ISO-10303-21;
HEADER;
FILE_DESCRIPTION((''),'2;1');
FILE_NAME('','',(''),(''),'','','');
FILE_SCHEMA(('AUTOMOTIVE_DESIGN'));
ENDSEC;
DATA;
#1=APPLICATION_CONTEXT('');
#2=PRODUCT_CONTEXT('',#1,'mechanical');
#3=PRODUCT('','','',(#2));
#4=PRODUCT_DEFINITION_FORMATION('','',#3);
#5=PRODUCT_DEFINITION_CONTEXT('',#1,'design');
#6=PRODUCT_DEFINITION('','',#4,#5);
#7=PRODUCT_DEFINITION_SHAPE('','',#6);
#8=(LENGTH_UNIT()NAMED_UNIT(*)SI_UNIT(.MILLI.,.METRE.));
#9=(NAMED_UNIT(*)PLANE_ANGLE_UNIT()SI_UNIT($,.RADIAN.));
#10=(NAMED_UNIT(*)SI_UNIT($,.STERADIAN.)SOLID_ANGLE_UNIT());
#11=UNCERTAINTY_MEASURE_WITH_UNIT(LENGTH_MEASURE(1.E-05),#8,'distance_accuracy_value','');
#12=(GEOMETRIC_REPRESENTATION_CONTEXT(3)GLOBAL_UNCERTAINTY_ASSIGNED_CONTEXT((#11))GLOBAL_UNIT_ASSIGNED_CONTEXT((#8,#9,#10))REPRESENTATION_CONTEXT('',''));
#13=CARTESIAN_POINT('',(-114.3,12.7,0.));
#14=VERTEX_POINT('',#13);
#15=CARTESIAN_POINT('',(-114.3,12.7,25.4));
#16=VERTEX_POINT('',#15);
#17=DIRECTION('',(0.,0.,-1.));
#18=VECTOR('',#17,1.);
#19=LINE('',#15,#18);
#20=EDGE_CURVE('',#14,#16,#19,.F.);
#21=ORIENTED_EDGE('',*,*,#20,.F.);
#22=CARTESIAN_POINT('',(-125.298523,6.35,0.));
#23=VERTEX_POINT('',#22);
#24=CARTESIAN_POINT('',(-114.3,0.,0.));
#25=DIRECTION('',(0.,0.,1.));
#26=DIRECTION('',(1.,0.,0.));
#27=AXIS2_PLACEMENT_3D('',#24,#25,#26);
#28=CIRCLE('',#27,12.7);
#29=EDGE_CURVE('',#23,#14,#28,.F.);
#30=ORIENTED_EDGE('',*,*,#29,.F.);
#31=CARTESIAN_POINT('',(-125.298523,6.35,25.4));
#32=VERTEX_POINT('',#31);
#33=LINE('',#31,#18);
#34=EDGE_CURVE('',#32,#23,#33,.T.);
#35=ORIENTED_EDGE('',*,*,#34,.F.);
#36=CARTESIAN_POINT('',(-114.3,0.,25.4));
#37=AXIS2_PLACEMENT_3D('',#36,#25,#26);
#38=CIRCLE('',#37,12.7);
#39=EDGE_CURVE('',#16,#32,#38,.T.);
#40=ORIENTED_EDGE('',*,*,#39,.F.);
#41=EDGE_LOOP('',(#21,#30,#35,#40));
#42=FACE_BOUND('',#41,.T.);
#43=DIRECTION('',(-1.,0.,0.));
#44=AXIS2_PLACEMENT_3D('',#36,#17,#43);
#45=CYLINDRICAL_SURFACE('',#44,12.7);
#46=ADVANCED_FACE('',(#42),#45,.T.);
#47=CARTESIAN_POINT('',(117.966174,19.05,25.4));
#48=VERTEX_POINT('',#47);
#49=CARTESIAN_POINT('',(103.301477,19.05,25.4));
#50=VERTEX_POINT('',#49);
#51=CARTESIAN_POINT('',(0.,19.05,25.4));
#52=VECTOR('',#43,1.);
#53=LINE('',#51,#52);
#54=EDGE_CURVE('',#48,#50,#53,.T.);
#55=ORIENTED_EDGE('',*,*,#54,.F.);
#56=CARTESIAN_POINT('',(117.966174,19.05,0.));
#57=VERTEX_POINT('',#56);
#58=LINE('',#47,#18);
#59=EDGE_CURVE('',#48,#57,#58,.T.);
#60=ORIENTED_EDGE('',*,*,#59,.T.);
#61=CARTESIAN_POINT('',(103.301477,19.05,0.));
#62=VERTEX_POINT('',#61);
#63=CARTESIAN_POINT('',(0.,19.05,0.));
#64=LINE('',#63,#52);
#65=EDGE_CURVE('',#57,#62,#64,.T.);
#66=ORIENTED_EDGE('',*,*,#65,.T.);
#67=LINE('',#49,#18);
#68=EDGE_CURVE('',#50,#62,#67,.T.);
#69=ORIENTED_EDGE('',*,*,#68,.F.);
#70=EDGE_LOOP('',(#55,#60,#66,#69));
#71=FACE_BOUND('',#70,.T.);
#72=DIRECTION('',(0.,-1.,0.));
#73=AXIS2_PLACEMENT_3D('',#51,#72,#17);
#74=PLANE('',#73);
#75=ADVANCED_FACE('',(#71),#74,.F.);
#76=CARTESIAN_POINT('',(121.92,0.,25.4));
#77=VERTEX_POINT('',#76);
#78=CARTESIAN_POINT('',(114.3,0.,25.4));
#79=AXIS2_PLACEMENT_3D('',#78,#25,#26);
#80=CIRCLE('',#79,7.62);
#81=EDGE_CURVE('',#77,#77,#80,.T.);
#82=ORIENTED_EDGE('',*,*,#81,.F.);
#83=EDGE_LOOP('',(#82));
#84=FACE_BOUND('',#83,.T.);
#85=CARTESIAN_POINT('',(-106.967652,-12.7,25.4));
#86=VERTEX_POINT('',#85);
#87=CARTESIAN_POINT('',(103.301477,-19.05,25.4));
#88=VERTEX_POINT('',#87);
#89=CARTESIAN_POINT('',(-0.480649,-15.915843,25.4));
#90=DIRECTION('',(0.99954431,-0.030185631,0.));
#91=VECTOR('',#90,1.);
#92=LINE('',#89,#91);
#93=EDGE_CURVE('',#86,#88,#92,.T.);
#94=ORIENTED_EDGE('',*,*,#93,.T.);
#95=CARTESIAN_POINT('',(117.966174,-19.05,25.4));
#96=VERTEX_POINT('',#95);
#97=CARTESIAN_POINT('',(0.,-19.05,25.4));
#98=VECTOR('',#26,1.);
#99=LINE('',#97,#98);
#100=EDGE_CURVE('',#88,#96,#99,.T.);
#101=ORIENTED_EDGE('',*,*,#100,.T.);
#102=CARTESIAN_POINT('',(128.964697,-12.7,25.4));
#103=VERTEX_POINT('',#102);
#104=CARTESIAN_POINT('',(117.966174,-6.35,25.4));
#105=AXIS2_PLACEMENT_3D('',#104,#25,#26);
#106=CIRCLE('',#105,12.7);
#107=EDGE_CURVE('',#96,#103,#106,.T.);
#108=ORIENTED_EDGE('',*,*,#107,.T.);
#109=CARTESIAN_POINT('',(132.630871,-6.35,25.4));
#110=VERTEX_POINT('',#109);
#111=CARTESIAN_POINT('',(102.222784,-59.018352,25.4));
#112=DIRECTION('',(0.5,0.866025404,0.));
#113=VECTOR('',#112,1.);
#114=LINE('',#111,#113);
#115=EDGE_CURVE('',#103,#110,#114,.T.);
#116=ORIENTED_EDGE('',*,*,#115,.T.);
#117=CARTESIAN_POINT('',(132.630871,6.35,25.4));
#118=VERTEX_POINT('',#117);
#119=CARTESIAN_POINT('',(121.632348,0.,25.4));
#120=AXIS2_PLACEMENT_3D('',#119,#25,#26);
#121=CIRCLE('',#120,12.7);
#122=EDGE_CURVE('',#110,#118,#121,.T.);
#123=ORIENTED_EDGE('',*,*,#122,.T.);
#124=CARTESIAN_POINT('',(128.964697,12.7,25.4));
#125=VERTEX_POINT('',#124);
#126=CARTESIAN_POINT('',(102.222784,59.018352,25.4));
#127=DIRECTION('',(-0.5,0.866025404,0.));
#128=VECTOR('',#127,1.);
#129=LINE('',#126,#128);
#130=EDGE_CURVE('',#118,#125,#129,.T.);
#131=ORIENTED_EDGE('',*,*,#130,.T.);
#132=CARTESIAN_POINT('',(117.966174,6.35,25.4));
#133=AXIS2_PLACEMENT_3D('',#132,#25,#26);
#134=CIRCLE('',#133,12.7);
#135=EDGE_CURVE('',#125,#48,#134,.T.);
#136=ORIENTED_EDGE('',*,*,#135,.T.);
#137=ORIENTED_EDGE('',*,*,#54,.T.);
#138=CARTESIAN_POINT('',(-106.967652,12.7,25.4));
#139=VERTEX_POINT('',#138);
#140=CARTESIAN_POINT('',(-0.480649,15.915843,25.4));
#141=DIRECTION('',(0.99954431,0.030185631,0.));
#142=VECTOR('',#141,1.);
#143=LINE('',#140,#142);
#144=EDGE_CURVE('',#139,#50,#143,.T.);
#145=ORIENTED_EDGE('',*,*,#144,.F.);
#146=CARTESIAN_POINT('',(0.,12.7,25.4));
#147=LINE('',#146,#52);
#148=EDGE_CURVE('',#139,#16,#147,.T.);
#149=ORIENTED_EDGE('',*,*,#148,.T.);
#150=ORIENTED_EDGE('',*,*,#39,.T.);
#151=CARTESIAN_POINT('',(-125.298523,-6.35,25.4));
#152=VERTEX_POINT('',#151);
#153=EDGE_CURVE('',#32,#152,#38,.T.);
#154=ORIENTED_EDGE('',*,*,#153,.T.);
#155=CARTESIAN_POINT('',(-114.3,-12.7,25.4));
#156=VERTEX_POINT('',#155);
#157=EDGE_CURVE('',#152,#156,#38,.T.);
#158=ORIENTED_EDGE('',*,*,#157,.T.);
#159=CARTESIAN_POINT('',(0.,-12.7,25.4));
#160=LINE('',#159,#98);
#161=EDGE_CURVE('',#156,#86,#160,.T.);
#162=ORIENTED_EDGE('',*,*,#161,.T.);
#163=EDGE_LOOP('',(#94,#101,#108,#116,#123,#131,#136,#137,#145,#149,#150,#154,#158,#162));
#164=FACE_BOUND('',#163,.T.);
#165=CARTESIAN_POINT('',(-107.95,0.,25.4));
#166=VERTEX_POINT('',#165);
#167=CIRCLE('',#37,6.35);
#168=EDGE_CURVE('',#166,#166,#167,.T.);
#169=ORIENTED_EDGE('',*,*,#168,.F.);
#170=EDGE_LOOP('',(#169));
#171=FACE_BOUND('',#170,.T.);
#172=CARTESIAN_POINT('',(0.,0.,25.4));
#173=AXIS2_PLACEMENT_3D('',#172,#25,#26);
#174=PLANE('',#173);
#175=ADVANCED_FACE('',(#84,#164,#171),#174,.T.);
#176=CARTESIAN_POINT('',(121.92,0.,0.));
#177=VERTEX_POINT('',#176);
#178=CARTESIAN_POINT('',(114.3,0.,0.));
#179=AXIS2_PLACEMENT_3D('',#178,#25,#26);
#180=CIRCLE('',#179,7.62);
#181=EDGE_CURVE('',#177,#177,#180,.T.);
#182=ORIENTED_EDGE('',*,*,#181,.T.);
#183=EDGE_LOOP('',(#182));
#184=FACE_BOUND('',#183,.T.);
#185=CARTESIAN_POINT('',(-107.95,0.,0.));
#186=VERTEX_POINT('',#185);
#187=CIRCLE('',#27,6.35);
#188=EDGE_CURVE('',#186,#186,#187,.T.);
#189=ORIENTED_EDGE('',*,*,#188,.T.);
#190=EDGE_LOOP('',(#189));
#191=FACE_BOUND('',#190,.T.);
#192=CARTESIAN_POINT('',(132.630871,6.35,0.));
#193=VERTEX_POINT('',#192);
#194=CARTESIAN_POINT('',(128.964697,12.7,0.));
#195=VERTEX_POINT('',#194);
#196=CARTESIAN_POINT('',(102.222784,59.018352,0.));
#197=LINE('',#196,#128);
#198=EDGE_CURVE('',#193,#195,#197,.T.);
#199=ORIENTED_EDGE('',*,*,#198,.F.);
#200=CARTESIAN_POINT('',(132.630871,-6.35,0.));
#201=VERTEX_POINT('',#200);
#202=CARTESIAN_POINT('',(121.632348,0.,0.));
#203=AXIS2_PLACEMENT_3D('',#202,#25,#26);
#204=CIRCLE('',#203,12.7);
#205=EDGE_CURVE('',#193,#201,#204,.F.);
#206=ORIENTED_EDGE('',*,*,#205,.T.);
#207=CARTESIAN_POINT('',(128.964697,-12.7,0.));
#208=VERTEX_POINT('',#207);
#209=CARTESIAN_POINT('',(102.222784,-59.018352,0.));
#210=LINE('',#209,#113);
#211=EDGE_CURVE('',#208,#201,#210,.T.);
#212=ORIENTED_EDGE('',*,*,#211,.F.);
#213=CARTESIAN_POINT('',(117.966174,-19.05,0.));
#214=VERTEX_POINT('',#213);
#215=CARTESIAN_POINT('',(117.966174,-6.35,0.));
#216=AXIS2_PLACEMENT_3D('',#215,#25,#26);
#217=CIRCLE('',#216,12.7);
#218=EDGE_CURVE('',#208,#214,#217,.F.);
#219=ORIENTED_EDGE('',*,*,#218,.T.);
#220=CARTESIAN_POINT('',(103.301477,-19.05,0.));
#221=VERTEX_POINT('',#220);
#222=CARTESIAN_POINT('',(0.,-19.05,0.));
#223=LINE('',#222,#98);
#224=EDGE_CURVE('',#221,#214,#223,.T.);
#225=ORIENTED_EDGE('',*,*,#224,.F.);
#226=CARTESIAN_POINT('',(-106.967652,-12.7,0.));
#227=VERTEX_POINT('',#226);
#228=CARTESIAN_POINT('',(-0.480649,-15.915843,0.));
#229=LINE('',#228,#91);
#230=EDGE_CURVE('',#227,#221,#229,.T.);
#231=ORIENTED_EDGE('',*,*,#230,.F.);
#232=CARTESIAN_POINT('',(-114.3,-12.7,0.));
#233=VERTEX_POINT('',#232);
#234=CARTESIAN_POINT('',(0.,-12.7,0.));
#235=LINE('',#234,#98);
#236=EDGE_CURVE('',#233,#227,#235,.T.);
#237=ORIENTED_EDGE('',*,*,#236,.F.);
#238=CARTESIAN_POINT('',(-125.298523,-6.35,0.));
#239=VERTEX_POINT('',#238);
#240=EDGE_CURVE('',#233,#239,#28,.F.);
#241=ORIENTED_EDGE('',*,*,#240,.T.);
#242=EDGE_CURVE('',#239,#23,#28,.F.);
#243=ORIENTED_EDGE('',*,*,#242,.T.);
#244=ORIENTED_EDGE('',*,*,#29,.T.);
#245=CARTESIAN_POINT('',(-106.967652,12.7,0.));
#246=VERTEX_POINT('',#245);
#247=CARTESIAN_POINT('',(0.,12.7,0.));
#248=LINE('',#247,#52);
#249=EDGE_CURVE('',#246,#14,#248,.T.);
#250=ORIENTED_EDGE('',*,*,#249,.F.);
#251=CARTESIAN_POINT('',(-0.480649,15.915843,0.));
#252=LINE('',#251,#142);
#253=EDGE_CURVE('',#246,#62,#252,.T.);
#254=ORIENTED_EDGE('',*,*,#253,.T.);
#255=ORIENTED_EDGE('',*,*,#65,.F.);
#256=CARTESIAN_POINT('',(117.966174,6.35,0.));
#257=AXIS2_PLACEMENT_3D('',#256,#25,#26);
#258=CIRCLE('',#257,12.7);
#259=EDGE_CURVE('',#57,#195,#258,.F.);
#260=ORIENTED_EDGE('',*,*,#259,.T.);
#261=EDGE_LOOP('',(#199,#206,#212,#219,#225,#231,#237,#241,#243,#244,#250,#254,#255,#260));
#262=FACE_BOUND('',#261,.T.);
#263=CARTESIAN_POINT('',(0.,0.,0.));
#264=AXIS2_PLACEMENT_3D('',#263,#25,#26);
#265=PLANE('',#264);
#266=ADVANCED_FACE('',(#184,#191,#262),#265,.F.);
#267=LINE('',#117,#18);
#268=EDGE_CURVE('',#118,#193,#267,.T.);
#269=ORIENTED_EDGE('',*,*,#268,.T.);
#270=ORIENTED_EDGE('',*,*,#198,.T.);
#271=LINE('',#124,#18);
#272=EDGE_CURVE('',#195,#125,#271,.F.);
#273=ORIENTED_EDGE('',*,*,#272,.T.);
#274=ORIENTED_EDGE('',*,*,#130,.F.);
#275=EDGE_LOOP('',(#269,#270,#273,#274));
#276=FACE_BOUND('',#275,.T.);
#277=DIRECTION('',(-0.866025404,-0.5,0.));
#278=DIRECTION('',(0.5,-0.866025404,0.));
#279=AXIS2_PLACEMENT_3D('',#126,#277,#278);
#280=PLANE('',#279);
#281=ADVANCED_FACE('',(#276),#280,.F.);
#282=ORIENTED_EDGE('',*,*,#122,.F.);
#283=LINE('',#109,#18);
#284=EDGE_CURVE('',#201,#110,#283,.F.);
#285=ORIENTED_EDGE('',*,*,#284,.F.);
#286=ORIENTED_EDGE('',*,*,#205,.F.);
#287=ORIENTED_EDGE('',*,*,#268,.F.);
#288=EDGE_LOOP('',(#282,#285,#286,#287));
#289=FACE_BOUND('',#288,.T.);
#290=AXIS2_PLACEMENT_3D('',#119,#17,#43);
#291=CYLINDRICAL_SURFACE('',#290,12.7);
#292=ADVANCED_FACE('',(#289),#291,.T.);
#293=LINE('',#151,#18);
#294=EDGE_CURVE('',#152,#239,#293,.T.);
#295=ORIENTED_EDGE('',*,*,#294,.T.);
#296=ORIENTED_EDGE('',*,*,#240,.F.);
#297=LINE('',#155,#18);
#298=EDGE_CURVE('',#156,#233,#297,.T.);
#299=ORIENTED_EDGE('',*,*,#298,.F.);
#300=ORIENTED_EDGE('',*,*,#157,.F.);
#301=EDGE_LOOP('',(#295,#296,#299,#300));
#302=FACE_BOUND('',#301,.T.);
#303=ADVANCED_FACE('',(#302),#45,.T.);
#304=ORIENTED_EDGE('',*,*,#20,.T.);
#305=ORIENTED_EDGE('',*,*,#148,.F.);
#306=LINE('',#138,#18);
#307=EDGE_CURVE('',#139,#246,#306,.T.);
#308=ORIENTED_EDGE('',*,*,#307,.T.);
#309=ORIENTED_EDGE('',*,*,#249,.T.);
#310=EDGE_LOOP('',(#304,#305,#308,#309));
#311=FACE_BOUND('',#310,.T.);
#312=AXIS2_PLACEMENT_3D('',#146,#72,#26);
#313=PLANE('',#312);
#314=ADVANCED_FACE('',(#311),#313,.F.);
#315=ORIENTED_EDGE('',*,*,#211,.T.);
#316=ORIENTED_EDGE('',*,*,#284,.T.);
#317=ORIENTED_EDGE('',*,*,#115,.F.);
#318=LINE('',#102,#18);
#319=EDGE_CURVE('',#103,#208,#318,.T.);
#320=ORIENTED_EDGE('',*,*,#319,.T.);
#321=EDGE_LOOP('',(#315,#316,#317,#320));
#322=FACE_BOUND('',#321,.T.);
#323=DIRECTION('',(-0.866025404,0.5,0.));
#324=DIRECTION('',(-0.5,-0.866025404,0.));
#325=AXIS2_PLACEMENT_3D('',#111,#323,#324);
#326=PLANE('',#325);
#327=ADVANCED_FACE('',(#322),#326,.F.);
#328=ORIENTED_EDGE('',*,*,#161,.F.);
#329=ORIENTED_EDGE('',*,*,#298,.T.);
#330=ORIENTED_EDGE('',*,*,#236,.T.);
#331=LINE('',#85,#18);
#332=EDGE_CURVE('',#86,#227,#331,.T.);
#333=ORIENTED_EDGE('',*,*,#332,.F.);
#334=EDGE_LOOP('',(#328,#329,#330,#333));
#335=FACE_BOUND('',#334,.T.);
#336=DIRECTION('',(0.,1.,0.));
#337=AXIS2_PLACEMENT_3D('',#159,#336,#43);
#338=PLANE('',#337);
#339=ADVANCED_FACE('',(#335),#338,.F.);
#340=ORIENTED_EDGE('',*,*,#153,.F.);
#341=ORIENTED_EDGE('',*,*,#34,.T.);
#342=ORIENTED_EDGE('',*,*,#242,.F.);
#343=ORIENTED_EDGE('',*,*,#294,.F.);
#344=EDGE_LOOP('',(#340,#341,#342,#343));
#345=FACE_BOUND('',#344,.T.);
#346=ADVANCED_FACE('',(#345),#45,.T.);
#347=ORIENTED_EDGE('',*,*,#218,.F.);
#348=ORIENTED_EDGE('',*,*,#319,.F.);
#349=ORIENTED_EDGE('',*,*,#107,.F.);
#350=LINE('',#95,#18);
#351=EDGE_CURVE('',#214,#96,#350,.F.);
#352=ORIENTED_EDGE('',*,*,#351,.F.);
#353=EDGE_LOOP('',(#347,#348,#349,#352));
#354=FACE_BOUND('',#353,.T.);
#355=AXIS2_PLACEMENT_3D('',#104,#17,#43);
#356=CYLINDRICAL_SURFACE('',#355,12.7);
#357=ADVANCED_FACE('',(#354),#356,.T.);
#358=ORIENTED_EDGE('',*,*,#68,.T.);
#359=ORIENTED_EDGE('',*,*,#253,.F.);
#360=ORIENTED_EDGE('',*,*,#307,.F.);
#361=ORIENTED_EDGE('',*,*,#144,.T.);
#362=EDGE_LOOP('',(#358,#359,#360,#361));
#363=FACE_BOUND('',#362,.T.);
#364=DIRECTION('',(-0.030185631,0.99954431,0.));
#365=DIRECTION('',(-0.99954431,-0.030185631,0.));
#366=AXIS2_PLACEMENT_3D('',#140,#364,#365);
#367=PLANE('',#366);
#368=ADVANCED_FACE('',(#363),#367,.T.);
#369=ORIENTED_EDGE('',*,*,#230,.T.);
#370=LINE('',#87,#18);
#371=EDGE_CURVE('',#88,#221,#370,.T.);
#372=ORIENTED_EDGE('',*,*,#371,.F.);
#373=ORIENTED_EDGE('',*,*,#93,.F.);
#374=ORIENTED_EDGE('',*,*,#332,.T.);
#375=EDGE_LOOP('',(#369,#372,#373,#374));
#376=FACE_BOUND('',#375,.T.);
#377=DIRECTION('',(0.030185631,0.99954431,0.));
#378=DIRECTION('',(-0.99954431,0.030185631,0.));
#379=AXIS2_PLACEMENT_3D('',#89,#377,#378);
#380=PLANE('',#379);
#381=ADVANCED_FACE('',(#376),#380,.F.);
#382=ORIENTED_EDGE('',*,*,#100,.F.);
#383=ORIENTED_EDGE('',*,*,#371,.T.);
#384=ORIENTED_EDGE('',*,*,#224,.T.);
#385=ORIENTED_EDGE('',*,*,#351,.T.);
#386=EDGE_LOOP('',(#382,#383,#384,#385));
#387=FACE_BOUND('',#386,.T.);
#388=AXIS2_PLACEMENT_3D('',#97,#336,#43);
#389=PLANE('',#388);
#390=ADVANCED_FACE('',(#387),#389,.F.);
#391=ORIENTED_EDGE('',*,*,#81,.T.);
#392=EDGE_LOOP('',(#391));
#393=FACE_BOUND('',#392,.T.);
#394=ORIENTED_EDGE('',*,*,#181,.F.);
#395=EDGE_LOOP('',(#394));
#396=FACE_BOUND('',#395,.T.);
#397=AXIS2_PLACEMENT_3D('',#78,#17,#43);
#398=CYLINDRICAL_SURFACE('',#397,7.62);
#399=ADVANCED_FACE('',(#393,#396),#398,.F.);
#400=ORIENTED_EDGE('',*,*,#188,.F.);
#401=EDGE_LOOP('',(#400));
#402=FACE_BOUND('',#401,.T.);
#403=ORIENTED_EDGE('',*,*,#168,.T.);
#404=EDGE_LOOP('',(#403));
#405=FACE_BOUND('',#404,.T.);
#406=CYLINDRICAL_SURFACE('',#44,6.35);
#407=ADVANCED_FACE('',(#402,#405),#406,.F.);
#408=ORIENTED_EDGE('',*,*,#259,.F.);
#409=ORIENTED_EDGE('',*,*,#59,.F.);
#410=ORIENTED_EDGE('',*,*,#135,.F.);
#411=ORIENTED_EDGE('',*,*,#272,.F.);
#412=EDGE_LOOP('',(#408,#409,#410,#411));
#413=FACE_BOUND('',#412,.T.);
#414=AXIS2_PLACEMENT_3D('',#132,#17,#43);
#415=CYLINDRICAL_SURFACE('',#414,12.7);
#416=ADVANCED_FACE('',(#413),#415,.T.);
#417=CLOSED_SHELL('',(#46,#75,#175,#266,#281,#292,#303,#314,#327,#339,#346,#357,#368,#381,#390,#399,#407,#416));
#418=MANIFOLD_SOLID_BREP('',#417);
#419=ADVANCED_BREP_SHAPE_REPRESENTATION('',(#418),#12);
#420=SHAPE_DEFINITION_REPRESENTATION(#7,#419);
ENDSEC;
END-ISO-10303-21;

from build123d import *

# Parameters (mm, degrees)
SKETCH1_R           = 6.35
SKETCH1_R_2         = 7.62
BOSS_EXTRUDE1_DEPTH = 25.4
FILLET3_R           = 12.7


with BuildPart() as part:
    # Sketch1 → Boss-Extrude1 (new body)
    with BuildSketch(Plane.XY):
        Polygon((-106.967651581, 12.7), (103.301477372, 19.05), (125.298522628, 19.05), (136.297045256, 0), (125.298522628, -19.05), (103.301477372, -19.05), (-106.967651581, -12.7), (-121.632348419, -12.7), (-128.964696837, 0), (-121.632348419, 12.7), align=None)
        with Locations((-114.3, 0)):
            Circle(SKETCH1_R, mode=Mode.SUBTRACT)
        with Locations((114.3, 0)):
            Circle(SKETCH1_R_2, mode=Mode.SUBTRACT)
    extrude(amount=BOSS_EXTRUDE1_DEPTH)

    # Fillet3
    fillet3_edges = [part.edges().sort_by_distance(p)[0] for p in [
        (-128.964696837, 0, 12.7),
        (-121.632348419, 12.7, 12.7),
        (125.298522628, -19.05, 12.7),
        (136.297045256, 0, 12.7),
        (125.298522628, 19.05, 12.7),
        (-121.632348419, -12.7, 12.7),
    ]]
    fillet(fillet3_edges, radius=FILLET3_R - 0.0001)  # a hair under: the kernel refuses the full size


solid = part.part
